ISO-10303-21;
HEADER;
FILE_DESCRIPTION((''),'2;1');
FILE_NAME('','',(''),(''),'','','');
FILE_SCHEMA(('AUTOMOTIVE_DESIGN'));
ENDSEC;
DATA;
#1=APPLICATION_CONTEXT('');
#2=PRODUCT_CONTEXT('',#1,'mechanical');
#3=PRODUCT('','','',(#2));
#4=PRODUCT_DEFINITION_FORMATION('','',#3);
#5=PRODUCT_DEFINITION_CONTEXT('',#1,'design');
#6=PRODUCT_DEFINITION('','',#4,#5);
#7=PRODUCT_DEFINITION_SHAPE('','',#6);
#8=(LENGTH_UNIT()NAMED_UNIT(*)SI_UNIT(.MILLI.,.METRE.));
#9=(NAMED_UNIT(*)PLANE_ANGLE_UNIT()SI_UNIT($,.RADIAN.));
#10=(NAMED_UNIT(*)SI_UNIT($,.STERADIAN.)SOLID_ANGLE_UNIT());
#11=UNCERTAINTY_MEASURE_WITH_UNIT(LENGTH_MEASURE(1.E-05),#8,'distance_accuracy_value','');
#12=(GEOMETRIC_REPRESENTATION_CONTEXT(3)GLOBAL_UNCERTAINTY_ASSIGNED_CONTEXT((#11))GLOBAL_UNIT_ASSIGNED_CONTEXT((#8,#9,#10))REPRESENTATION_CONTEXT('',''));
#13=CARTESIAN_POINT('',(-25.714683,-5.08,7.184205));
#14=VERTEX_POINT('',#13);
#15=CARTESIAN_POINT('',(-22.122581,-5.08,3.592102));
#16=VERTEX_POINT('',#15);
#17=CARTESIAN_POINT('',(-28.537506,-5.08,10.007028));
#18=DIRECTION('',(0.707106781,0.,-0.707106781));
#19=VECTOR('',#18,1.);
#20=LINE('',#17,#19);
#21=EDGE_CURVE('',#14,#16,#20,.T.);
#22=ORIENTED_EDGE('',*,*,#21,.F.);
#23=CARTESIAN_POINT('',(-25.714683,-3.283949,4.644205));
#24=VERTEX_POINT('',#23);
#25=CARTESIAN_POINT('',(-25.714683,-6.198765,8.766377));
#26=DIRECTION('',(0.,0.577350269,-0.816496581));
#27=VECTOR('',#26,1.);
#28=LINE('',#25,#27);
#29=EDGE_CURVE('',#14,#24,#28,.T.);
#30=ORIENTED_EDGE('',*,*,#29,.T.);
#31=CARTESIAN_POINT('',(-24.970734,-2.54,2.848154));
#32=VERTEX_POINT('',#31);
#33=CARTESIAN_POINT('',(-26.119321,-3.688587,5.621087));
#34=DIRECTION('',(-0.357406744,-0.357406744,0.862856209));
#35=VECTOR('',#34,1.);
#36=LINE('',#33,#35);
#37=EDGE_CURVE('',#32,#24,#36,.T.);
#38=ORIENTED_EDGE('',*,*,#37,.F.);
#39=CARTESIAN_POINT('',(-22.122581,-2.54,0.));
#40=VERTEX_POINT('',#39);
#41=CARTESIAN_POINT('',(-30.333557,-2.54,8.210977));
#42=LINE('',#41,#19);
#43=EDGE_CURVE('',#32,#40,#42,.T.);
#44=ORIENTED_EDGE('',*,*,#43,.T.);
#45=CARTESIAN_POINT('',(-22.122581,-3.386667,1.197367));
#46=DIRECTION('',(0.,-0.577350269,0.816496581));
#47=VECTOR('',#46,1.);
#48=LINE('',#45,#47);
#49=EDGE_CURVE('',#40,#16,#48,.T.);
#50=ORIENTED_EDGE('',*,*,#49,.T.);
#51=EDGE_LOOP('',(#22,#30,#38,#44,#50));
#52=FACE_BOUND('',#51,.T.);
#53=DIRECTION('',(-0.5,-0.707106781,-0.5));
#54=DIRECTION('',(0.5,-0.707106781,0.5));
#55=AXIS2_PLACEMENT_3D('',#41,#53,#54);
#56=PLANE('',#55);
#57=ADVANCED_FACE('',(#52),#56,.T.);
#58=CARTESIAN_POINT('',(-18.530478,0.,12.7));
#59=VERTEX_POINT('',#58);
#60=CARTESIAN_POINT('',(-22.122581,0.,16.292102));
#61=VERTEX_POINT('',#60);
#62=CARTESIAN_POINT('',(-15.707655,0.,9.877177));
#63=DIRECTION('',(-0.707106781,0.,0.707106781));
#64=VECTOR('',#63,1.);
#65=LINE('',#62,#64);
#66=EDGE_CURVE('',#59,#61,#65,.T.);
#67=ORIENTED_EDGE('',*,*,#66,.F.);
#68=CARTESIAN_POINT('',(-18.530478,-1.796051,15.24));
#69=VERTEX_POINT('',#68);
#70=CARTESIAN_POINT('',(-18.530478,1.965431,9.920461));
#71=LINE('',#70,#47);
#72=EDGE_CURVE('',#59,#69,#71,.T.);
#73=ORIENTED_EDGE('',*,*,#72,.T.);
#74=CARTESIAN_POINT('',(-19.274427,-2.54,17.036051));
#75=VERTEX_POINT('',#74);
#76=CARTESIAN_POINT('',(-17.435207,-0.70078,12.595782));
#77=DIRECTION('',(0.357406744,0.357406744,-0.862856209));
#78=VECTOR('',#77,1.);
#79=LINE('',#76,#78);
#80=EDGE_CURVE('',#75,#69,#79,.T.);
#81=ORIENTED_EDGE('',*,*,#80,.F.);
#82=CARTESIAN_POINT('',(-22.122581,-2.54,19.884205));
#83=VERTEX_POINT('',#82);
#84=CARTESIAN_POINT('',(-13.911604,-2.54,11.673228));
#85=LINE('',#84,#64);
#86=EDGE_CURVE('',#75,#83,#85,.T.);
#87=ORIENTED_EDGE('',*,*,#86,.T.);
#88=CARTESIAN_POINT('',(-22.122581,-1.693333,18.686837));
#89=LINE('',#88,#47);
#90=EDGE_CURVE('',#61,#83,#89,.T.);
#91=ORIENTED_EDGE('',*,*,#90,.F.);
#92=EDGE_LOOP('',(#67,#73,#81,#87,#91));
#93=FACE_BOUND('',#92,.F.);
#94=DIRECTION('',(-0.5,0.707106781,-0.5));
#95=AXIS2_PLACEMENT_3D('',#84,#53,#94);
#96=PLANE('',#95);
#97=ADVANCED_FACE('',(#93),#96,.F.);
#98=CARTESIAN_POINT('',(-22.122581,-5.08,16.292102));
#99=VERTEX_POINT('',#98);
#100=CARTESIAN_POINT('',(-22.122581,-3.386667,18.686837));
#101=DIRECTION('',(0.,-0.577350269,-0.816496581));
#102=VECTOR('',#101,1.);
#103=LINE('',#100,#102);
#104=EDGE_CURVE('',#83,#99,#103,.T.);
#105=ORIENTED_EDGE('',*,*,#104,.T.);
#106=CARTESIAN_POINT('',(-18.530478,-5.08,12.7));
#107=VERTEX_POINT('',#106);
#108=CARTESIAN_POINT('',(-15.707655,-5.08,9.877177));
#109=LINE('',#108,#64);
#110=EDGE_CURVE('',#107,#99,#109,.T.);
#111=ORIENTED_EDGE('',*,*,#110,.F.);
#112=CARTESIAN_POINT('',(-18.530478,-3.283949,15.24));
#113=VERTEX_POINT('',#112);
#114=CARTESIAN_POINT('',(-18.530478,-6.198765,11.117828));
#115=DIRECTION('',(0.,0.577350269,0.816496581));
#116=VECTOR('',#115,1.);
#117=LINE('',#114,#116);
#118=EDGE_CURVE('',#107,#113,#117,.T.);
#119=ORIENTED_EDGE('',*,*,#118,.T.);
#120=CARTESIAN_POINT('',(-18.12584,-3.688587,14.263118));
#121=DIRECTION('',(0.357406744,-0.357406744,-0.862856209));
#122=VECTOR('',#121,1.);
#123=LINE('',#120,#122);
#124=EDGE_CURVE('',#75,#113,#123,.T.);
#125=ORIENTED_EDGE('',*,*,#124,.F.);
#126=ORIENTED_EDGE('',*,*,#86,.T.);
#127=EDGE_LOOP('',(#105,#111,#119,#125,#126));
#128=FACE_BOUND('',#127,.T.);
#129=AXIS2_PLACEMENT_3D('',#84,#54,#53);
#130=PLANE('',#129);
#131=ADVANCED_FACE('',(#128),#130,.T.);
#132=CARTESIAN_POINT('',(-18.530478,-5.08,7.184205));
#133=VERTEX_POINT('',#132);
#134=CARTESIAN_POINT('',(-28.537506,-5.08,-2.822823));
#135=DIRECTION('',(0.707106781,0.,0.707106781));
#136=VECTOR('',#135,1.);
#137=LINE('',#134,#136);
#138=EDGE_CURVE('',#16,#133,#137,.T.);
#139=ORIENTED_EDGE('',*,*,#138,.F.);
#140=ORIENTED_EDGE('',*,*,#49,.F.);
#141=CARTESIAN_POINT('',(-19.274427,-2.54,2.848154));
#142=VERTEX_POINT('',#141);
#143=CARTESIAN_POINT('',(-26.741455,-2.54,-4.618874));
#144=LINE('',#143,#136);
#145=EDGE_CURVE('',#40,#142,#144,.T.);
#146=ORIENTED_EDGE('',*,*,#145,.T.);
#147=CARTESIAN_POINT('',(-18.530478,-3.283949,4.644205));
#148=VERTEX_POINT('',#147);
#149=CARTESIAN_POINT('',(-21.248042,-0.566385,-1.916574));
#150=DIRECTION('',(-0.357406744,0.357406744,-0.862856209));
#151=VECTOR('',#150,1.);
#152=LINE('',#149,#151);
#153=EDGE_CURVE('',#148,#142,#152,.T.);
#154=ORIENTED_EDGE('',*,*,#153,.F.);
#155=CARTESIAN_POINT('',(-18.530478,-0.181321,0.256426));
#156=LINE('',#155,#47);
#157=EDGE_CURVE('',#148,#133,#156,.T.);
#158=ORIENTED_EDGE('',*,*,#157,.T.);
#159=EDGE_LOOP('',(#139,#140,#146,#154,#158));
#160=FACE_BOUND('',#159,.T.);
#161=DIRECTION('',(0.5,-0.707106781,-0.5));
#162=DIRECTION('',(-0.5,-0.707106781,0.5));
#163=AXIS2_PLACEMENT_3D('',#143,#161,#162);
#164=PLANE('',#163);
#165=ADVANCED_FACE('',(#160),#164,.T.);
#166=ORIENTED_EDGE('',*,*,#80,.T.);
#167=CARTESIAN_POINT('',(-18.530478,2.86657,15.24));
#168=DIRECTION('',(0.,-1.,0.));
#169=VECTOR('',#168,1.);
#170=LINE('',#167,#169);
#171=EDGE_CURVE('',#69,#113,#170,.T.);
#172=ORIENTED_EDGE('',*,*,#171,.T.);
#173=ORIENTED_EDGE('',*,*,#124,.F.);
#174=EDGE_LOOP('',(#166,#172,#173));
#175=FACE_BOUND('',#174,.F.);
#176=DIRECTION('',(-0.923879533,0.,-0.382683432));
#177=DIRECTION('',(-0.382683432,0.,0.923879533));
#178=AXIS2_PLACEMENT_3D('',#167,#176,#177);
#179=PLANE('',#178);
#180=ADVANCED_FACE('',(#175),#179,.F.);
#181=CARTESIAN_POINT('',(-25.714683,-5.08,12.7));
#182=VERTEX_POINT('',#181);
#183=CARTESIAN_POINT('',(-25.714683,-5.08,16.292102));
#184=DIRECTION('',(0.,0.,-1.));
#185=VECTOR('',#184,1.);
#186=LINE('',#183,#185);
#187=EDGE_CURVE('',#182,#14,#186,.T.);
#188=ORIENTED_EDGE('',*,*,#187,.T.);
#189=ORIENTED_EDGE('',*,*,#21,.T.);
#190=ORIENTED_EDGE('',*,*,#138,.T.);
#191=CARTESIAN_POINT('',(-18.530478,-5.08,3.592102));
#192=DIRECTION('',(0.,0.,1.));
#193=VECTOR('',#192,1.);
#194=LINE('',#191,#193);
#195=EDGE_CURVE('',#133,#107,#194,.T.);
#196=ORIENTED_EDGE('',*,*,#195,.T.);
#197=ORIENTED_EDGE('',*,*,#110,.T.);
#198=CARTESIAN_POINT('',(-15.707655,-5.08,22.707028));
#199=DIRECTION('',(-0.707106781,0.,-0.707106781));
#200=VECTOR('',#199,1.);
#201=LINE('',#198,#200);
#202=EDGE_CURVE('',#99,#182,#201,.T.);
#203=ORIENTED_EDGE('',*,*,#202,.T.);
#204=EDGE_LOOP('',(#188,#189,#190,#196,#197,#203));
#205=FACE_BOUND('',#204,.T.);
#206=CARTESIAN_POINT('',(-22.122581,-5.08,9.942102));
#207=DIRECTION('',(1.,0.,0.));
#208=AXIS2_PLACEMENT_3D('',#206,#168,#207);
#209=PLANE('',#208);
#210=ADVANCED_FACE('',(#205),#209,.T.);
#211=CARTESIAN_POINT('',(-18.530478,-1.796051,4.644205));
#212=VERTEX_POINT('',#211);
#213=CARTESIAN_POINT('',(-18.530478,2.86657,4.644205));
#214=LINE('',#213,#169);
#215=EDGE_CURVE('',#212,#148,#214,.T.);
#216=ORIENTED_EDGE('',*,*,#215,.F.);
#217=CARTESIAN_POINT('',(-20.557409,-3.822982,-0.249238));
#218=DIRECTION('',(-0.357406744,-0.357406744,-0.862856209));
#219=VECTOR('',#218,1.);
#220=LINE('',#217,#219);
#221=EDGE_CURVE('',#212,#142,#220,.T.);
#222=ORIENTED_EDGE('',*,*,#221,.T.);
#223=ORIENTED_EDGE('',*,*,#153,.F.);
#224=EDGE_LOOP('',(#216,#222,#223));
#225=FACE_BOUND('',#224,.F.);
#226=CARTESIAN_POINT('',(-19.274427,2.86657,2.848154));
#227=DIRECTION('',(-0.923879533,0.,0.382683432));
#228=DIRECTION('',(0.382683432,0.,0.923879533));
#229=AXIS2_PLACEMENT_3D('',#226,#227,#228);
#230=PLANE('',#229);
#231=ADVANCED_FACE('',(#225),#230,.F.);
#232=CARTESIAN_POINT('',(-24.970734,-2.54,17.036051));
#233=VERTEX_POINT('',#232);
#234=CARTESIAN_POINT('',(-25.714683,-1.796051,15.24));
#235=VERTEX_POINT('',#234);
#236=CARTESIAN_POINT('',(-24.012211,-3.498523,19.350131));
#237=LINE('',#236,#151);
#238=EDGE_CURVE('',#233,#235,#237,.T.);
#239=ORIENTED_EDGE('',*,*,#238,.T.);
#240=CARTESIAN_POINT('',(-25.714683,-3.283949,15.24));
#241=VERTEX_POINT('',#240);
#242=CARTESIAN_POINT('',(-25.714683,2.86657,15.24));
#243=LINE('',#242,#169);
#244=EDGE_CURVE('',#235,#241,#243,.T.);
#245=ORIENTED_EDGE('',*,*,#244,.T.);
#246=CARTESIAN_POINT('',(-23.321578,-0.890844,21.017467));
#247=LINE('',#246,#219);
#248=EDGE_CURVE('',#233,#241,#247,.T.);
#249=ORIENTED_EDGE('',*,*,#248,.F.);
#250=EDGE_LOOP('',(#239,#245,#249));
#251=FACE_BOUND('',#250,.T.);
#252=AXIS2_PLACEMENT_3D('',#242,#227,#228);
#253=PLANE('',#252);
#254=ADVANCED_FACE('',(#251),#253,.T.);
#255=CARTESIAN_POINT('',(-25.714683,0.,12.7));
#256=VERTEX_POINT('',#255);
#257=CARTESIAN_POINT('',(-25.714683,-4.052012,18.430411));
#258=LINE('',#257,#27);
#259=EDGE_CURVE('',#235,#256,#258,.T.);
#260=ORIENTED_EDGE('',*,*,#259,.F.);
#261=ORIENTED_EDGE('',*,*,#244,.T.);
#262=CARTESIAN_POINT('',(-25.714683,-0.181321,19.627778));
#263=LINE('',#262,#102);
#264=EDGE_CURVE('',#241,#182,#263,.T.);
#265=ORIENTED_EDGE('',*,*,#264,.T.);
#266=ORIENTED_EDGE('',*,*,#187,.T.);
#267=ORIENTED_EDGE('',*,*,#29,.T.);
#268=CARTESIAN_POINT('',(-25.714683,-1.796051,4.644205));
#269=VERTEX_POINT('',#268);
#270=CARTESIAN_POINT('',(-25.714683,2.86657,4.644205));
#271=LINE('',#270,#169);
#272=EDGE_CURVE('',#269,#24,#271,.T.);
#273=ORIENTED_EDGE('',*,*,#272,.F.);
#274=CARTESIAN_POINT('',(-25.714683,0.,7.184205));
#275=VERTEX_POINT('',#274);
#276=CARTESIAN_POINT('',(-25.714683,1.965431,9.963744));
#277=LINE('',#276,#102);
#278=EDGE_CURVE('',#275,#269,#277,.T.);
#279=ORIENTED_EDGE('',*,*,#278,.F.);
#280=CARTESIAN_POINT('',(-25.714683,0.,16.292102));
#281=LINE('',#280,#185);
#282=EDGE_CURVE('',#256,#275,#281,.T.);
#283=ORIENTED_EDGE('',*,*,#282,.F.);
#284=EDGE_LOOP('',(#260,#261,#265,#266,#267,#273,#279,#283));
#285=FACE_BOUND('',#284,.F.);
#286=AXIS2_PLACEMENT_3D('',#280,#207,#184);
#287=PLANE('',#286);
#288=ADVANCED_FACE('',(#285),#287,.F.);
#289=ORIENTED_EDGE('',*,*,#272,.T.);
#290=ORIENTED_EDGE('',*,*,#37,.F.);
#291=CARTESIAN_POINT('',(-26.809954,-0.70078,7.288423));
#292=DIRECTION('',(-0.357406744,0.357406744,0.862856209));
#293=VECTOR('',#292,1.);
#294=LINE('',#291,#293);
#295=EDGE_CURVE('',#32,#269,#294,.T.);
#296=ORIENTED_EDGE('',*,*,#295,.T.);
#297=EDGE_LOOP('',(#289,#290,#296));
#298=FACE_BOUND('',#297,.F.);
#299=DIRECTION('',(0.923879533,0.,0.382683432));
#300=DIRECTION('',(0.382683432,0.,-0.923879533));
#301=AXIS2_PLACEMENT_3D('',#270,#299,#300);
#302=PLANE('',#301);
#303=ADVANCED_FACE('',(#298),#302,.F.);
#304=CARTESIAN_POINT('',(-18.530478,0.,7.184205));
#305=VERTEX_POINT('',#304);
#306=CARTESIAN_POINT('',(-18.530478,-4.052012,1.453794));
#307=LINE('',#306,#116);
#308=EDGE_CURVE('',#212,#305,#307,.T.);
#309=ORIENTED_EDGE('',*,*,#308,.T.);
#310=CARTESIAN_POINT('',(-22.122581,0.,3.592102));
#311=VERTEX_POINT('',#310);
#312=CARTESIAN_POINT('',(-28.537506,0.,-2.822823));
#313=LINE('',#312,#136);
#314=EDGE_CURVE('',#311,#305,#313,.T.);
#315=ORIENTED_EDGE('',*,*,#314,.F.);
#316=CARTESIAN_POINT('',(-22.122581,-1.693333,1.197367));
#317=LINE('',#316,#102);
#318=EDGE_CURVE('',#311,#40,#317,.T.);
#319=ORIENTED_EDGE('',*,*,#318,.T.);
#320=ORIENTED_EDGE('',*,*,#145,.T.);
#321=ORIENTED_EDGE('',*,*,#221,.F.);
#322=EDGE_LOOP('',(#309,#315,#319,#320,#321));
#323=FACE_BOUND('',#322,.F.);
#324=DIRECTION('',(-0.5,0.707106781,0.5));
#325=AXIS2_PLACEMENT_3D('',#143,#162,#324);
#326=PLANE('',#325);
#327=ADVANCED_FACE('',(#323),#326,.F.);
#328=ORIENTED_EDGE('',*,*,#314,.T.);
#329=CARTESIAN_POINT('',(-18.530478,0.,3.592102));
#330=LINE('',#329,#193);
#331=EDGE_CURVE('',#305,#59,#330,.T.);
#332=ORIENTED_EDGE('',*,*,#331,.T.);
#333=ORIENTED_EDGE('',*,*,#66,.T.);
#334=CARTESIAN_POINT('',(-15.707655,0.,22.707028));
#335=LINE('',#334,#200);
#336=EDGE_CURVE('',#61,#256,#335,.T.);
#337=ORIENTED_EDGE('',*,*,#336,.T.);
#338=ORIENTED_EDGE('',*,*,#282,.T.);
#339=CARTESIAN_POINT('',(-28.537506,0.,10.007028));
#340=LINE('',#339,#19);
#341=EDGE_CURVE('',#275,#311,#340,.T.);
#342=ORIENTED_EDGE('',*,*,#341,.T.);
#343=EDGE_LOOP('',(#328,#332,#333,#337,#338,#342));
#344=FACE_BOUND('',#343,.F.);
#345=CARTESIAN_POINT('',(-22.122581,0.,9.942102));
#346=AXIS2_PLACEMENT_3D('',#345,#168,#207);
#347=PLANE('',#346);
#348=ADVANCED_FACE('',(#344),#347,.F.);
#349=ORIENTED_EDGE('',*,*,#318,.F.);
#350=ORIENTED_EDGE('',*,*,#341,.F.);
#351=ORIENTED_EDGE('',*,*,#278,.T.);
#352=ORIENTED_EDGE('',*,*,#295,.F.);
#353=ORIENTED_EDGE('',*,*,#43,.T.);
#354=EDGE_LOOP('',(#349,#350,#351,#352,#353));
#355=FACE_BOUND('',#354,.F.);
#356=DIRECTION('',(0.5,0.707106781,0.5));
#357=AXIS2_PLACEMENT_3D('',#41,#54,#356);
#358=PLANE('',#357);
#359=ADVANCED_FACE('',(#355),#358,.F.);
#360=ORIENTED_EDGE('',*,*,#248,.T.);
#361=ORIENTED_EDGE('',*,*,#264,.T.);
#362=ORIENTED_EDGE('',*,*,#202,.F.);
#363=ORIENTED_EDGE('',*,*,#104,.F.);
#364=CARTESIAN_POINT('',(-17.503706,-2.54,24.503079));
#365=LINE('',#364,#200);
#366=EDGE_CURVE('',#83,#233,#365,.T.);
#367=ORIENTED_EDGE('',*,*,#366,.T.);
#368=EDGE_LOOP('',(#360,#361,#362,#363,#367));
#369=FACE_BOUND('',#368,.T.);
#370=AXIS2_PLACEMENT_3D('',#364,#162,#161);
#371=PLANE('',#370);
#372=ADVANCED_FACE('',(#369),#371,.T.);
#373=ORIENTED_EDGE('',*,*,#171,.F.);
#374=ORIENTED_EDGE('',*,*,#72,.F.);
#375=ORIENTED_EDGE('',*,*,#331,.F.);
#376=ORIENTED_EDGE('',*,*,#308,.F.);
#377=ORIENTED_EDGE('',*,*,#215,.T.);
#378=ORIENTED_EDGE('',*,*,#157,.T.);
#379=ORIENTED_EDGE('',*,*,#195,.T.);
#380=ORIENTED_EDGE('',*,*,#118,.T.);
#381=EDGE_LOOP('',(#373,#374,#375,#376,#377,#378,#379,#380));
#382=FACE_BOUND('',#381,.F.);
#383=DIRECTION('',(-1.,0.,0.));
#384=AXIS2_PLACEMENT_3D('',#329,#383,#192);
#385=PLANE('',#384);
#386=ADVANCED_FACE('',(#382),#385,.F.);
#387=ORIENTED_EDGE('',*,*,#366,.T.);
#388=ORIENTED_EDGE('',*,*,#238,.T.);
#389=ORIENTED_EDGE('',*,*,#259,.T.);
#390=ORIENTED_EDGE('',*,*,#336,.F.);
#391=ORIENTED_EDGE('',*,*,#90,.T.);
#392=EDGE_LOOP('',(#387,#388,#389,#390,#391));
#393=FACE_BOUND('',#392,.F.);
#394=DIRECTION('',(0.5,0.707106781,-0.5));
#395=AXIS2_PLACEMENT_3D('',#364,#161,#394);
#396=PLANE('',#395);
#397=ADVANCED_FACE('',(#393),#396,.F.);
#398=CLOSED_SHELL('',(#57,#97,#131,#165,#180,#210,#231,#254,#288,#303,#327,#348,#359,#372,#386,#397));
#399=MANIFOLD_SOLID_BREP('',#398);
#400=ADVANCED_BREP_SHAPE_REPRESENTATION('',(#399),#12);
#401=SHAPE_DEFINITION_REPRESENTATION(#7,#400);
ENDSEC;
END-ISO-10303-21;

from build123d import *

# Parameters (mm, degrees)
F1_DEPTH    = 5.08
F2_T1_DEPTH = 18.1441495789
F2_T3_DEPTH = 18.1441495789
F2_T5_DEPTH = 18.1441495789
F2_T7_DEPTH = 18.1441495789
F2_T9_DEPTH = 10.8131399699


# Not quite as in the source:
# - a fillet or chamfer that OpenCascade refuses, or shapes differently, is made with other operations: its cross-section is extruded or revolved along the edge and cut away or added


with BuildPart() as f1:
    # F0 (on Front) → F1 (new body)
    with BuildSketch(Plane.XZ):
        Polygon((-25.7146830065, 3.5921024484), (-22.1225805581, 0), (-18.5304781096, 3.5921024484), (-18.5304781096, 16.2921024484), (-22.1225805581, 19.8842048969), (-25.7146830065, 16.2921024484), align=None)
    extrude(amount=F1_DEPTH)

    # F2: chamfer of 2.54 on 12 edges, made by hand

    # F2_s2 → F2_t1 (cut)
    with BuildSketch(Plane(origin=(-12.7924159002, 0, 12.7924159002), x_dir=(0, 1, 0), z_dir=(-0.7071067812, 0, 0.7071067812))):
        Polygon((-2.54, 1.5827706089), (-5.08, 4.1227706089), (-5.08, 1.5827706089), align=None)
        Polygon((-2.54, 1.5827706089), (0, 4.1227706089), (0, 1.5827706089), align=None)
    extrude(amount=F2_T1_DEPTH, mode=Mode.SUBTRACT)

    # F2_s4 → F2_t3 (cut)
    with BuildSketch(Plane(origin=(3.4996865482, 0, 3.4996865482), x_dir=(0, 1, 0), z_dir=(-0.7071067812, 0, -0.7071067812))):
        Polygon((-2.54, -29.703282851), (-5.08, -27.163282851), (-5.08, -29.703282851), align=None)
        Polygon((-2.54, -29.703282851), (0, -27.163282851), (0, -29.703282851), align=None)
    extrude(amount=F2_T3_DEPTH, mode=Mode.SUBTRACT)

    # F2_s6 → F2_t5 (cut)
    with BuildSketch(Plane(origin=(-19.2722671063, 0, 19.2722671063), x_dir=(0, 1, 0), z_dir=(0.7071067812, 0, -0.7071067812))):
        Polygon((-2.54, -15.64302673), (-5.08, -13.10302673), (-5.08, -15.64302673), align=None)
        Polygon((-2.54, -15.64302673), (0, -13.10302673), (0, -15.64302673), align=None)
    extrude(amount=F2_T5_DEPTH, mode=Mode.SUBTRACT)

    # F2_s8 → F2_t7 (cut)
    with BuildSketch(Plane(origin=(-15.6801646579, 0, -15.6801646579), x_dir=(0, 1, 0), z_dir=(0.7071067812, 0, 0.7071067812))):
        Polygon((-2.54, 15.64302673), (-5.08, 18.18302673), (-5.08, 15.64302673), align=None)
        Polygon((-2.54, 15.64302673), (0, 18.18302673), (0, 15.64302673), align=None)
    extrude(amount=F2_T7_DEPTH, mode=Mode.SUBTRACT)

    # F2_s10 → F2_t9 (cut)
    with BuildSketch(Plane.XZ.offset(-2.8665699849)):
        Polygon((-19.2744268854, 2.8481536726), (-18.5304781096, 4.6442048969), (-18.5304781096, 3.5921024484), align=None)
        Polygon((-18.5304781096, 15.24), (-19.2744268854, 17.0360512242), (-18.5304781096, 16.2921024484), align=None)
        Polygon((-25.7146830065, 15.24), (-24.9707342307, 17.0360512242), (-25.7146830065, 16.2921024484), align=None)
        Polygon((-25.7146830065, 4.6442048969), (-24.9707342307, 2.8481536726), (-25.7146830065, 3.5921024484), align=None)
    extrude(amount=F2_T9_DEPTH, mode=Mode.SUBTRACT)


solid = f1.part
